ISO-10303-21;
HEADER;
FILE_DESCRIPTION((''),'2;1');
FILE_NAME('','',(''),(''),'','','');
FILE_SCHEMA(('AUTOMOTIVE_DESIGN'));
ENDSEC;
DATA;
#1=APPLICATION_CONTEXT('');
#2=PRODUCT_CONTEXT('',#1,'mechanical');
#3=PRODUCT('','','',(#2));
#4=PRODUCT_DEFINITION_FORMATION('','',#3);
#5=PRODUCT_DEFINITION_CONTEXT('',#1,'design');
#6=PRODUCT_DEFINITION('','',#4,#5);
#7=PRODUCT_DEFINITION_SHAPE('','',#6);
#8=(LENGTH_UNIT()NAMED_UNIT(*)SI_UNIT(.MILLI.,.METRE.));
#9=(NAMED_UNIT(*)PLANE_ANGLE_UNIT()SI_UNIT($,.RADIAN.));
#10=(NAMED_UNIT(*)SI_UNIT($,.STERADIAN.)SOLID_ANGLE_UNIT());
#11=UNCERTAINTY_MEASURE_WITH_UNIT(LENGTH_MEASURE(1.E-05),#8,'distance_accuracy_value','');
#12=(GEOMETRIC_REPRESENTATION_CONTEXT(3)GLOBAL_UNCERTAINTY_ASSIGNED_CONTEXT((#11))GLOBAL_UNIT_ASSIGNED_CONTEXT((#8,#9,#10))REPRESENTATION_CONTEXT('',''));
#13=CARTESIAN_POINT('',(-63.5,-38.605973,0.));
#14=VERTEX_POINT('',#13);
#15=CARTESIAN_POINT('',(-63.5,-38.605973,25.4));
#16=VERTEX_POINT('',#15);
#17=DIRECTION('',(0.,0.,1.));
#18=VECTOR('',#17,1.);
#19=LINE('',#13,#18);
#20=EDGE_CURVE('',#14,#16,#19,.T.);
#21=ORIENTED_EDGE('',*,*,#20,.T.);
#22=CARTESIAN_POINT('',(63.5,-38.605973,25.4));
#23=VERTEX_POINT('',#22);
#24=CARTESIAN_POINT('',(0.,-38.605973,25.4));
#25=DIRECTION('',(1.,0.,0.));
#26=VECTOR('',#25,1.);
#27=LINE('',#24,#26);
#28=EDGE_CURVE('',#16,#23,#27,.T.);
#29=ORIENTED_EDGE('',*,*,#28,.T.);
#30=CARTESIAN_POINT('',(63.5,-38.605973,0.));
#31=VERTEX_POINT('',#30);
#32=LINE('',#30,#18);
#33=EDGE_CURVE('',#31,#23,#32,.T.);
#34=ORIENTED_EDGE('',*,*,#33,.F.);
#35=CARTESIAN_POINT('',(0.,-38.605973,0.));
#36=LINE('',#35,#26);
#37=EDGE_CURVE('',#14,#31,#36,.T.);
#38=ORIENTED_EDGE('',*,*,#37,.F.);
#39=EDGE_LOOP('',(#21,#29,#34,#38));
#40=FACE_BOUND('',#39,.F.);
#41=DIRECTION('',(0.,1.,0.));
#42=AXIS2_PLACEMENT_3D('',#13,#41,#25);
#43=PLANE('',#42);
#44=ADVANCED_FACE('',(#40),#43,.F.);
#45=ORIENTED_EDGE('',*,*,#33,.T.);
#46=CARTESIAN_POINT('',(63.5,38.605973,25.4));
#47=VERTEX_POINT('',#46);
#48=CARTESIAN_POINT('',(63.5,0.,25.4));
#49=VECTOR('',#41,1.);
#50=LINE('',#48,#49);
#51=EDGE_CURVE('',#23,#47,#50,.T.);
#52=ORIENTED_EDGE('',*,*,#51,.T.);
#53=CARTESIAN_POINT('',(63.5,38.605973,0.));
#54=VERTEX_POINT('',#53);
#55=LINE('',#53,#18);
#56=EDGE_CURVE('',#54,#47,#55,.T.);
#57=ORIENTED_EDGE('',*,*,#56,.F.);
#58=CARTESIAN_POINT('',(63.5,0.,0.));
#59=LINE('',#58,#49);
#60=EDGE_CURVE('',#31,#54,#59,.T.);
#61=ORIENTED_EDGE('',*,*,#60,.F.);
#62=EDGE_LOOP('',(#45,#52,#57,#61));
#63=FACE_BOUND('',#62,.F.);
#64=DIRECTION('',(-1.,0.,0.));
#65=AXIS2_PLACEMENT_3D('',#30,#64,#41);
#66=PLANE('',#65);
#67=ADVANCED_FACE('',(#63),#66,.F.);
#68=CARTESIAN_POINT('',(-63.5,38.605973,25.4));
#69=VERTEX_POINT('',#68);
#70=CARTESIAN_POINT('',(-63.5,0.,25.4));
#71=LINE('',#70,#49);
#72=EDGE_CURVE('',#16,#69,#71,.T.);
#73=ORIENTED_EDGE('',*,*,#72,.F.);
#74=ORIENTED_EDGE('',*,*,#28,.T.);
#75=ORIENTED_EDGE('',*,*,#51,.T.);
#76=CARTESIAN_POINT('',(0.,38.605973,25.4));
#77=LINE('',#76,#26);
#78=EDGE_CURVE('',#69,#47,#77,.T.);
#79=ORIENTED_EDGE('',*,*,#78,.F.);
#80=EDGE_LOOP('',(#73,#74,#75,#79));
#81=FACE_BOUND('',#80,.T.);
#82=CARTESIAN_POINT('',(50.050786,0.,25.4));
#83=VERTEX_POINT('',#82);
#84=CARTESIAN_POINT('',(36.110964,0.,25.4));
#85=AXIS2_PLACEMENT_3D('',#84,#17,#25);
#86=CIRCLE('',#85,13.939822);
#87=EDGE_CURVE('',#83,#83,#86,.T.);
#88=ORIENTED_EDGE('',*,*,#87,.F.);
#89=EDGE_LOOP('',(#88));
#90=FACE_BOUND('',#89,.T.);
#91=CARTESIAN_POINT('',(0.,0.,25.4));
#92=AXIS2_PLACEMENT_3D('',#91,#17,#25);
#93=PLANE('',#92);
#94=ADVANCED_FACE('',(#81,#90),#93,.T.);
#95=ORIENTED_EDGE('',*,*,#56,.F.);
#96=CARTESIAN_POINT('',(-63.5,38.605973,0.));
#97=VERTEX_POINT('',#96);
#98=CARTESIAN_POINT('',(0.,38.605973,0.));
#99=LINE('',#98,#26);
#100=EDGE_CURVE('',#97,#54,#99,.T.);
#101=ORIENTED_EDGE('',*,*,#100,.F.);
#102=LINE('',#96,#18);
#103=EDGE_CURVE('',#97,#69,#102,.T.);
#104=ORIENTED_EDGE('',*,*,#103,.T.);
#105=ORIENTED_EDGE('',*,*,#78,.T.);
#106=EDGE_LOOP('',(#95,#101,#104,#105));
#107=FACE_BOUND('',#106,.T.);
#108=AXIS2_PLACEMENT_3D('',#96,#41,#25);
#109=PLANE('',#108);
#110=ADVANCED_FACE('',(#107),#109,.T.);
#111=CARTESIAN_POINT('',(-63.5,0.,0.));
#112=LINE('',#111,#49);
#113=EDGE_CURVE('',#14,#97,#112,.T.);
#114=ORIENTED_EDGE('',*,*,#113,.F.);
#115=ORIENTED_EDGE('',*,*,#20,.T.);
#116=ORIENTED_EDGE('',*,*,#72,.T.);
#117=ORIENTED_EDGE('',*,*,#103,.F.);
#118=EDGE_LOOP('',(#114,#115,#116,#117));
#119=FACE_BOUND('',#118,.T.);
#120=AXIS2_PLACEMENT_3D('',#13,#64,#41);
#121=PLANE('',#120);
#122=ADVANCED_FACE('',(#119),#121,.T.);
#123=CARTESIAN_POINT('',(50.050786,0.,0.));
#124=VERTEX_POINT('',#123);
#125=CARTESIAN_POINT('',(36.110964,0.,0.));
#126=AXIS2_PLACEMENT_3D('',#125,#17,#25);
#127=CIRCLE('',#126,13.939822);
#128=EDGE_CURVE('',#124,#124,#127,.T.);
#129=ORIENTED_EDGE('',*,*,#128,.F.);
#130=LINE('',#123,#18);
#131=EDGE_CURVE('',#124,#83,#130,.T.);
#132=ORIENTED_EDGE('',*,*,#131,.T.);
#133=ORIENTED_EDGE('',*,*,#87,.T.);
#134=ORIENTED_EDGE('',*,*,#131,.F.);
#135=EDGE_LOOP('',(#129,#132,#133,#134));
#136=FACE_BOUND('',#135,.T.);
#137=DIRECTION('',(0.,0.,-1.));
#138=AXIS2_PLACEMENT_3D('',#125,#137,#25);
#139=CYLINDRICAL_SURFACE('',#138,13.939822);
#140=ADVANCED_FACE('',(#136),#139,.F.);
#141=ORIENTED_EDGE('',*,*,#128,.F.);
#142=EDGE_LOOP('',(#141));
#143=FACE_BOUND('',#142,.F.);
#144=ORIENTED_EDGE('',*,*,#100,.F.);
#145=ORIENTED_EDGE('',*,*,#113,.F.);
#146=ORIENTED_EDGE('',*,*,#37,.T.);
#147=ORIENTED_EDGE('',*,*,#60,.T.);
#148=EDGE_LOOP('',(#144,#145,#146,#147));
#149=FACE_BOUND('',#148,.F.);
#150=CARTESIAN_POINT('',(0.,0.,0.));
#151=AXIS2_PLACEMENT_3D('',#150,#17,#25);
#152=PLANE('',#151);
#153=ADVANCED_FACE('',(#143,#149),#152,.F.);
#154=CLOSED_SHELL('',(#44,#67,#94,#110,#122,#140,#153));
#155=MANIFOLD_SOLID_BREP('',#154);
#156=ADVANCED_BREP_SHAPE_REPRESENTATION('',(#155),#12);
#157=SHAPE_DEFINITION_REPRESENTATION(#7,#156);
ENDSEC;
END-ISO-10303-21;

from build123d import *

# Parameters (mm, degrees)
F0_W     = 127
F0_H     = 77.2119465919
F0_R     = 13.9398216292
F1_DEPTH = 25.4


# Not quite as in the source:
# - the program builds the solid bodies; features that only make, move or delete a surface that nothing else refers to are left out


with BuildPart() as f1:
    # F0 (on Top) → F1 (new body)
    with BuildSketch(Plane.XY):
        Rectangle(F0_W, F0_H)
        with Locations((36.1109643691, 0)):
            Circle(F0_R, mode=Mode.SUBTRACT)
    extrude(amount=F1_DEPTH)


solid = f1.part
